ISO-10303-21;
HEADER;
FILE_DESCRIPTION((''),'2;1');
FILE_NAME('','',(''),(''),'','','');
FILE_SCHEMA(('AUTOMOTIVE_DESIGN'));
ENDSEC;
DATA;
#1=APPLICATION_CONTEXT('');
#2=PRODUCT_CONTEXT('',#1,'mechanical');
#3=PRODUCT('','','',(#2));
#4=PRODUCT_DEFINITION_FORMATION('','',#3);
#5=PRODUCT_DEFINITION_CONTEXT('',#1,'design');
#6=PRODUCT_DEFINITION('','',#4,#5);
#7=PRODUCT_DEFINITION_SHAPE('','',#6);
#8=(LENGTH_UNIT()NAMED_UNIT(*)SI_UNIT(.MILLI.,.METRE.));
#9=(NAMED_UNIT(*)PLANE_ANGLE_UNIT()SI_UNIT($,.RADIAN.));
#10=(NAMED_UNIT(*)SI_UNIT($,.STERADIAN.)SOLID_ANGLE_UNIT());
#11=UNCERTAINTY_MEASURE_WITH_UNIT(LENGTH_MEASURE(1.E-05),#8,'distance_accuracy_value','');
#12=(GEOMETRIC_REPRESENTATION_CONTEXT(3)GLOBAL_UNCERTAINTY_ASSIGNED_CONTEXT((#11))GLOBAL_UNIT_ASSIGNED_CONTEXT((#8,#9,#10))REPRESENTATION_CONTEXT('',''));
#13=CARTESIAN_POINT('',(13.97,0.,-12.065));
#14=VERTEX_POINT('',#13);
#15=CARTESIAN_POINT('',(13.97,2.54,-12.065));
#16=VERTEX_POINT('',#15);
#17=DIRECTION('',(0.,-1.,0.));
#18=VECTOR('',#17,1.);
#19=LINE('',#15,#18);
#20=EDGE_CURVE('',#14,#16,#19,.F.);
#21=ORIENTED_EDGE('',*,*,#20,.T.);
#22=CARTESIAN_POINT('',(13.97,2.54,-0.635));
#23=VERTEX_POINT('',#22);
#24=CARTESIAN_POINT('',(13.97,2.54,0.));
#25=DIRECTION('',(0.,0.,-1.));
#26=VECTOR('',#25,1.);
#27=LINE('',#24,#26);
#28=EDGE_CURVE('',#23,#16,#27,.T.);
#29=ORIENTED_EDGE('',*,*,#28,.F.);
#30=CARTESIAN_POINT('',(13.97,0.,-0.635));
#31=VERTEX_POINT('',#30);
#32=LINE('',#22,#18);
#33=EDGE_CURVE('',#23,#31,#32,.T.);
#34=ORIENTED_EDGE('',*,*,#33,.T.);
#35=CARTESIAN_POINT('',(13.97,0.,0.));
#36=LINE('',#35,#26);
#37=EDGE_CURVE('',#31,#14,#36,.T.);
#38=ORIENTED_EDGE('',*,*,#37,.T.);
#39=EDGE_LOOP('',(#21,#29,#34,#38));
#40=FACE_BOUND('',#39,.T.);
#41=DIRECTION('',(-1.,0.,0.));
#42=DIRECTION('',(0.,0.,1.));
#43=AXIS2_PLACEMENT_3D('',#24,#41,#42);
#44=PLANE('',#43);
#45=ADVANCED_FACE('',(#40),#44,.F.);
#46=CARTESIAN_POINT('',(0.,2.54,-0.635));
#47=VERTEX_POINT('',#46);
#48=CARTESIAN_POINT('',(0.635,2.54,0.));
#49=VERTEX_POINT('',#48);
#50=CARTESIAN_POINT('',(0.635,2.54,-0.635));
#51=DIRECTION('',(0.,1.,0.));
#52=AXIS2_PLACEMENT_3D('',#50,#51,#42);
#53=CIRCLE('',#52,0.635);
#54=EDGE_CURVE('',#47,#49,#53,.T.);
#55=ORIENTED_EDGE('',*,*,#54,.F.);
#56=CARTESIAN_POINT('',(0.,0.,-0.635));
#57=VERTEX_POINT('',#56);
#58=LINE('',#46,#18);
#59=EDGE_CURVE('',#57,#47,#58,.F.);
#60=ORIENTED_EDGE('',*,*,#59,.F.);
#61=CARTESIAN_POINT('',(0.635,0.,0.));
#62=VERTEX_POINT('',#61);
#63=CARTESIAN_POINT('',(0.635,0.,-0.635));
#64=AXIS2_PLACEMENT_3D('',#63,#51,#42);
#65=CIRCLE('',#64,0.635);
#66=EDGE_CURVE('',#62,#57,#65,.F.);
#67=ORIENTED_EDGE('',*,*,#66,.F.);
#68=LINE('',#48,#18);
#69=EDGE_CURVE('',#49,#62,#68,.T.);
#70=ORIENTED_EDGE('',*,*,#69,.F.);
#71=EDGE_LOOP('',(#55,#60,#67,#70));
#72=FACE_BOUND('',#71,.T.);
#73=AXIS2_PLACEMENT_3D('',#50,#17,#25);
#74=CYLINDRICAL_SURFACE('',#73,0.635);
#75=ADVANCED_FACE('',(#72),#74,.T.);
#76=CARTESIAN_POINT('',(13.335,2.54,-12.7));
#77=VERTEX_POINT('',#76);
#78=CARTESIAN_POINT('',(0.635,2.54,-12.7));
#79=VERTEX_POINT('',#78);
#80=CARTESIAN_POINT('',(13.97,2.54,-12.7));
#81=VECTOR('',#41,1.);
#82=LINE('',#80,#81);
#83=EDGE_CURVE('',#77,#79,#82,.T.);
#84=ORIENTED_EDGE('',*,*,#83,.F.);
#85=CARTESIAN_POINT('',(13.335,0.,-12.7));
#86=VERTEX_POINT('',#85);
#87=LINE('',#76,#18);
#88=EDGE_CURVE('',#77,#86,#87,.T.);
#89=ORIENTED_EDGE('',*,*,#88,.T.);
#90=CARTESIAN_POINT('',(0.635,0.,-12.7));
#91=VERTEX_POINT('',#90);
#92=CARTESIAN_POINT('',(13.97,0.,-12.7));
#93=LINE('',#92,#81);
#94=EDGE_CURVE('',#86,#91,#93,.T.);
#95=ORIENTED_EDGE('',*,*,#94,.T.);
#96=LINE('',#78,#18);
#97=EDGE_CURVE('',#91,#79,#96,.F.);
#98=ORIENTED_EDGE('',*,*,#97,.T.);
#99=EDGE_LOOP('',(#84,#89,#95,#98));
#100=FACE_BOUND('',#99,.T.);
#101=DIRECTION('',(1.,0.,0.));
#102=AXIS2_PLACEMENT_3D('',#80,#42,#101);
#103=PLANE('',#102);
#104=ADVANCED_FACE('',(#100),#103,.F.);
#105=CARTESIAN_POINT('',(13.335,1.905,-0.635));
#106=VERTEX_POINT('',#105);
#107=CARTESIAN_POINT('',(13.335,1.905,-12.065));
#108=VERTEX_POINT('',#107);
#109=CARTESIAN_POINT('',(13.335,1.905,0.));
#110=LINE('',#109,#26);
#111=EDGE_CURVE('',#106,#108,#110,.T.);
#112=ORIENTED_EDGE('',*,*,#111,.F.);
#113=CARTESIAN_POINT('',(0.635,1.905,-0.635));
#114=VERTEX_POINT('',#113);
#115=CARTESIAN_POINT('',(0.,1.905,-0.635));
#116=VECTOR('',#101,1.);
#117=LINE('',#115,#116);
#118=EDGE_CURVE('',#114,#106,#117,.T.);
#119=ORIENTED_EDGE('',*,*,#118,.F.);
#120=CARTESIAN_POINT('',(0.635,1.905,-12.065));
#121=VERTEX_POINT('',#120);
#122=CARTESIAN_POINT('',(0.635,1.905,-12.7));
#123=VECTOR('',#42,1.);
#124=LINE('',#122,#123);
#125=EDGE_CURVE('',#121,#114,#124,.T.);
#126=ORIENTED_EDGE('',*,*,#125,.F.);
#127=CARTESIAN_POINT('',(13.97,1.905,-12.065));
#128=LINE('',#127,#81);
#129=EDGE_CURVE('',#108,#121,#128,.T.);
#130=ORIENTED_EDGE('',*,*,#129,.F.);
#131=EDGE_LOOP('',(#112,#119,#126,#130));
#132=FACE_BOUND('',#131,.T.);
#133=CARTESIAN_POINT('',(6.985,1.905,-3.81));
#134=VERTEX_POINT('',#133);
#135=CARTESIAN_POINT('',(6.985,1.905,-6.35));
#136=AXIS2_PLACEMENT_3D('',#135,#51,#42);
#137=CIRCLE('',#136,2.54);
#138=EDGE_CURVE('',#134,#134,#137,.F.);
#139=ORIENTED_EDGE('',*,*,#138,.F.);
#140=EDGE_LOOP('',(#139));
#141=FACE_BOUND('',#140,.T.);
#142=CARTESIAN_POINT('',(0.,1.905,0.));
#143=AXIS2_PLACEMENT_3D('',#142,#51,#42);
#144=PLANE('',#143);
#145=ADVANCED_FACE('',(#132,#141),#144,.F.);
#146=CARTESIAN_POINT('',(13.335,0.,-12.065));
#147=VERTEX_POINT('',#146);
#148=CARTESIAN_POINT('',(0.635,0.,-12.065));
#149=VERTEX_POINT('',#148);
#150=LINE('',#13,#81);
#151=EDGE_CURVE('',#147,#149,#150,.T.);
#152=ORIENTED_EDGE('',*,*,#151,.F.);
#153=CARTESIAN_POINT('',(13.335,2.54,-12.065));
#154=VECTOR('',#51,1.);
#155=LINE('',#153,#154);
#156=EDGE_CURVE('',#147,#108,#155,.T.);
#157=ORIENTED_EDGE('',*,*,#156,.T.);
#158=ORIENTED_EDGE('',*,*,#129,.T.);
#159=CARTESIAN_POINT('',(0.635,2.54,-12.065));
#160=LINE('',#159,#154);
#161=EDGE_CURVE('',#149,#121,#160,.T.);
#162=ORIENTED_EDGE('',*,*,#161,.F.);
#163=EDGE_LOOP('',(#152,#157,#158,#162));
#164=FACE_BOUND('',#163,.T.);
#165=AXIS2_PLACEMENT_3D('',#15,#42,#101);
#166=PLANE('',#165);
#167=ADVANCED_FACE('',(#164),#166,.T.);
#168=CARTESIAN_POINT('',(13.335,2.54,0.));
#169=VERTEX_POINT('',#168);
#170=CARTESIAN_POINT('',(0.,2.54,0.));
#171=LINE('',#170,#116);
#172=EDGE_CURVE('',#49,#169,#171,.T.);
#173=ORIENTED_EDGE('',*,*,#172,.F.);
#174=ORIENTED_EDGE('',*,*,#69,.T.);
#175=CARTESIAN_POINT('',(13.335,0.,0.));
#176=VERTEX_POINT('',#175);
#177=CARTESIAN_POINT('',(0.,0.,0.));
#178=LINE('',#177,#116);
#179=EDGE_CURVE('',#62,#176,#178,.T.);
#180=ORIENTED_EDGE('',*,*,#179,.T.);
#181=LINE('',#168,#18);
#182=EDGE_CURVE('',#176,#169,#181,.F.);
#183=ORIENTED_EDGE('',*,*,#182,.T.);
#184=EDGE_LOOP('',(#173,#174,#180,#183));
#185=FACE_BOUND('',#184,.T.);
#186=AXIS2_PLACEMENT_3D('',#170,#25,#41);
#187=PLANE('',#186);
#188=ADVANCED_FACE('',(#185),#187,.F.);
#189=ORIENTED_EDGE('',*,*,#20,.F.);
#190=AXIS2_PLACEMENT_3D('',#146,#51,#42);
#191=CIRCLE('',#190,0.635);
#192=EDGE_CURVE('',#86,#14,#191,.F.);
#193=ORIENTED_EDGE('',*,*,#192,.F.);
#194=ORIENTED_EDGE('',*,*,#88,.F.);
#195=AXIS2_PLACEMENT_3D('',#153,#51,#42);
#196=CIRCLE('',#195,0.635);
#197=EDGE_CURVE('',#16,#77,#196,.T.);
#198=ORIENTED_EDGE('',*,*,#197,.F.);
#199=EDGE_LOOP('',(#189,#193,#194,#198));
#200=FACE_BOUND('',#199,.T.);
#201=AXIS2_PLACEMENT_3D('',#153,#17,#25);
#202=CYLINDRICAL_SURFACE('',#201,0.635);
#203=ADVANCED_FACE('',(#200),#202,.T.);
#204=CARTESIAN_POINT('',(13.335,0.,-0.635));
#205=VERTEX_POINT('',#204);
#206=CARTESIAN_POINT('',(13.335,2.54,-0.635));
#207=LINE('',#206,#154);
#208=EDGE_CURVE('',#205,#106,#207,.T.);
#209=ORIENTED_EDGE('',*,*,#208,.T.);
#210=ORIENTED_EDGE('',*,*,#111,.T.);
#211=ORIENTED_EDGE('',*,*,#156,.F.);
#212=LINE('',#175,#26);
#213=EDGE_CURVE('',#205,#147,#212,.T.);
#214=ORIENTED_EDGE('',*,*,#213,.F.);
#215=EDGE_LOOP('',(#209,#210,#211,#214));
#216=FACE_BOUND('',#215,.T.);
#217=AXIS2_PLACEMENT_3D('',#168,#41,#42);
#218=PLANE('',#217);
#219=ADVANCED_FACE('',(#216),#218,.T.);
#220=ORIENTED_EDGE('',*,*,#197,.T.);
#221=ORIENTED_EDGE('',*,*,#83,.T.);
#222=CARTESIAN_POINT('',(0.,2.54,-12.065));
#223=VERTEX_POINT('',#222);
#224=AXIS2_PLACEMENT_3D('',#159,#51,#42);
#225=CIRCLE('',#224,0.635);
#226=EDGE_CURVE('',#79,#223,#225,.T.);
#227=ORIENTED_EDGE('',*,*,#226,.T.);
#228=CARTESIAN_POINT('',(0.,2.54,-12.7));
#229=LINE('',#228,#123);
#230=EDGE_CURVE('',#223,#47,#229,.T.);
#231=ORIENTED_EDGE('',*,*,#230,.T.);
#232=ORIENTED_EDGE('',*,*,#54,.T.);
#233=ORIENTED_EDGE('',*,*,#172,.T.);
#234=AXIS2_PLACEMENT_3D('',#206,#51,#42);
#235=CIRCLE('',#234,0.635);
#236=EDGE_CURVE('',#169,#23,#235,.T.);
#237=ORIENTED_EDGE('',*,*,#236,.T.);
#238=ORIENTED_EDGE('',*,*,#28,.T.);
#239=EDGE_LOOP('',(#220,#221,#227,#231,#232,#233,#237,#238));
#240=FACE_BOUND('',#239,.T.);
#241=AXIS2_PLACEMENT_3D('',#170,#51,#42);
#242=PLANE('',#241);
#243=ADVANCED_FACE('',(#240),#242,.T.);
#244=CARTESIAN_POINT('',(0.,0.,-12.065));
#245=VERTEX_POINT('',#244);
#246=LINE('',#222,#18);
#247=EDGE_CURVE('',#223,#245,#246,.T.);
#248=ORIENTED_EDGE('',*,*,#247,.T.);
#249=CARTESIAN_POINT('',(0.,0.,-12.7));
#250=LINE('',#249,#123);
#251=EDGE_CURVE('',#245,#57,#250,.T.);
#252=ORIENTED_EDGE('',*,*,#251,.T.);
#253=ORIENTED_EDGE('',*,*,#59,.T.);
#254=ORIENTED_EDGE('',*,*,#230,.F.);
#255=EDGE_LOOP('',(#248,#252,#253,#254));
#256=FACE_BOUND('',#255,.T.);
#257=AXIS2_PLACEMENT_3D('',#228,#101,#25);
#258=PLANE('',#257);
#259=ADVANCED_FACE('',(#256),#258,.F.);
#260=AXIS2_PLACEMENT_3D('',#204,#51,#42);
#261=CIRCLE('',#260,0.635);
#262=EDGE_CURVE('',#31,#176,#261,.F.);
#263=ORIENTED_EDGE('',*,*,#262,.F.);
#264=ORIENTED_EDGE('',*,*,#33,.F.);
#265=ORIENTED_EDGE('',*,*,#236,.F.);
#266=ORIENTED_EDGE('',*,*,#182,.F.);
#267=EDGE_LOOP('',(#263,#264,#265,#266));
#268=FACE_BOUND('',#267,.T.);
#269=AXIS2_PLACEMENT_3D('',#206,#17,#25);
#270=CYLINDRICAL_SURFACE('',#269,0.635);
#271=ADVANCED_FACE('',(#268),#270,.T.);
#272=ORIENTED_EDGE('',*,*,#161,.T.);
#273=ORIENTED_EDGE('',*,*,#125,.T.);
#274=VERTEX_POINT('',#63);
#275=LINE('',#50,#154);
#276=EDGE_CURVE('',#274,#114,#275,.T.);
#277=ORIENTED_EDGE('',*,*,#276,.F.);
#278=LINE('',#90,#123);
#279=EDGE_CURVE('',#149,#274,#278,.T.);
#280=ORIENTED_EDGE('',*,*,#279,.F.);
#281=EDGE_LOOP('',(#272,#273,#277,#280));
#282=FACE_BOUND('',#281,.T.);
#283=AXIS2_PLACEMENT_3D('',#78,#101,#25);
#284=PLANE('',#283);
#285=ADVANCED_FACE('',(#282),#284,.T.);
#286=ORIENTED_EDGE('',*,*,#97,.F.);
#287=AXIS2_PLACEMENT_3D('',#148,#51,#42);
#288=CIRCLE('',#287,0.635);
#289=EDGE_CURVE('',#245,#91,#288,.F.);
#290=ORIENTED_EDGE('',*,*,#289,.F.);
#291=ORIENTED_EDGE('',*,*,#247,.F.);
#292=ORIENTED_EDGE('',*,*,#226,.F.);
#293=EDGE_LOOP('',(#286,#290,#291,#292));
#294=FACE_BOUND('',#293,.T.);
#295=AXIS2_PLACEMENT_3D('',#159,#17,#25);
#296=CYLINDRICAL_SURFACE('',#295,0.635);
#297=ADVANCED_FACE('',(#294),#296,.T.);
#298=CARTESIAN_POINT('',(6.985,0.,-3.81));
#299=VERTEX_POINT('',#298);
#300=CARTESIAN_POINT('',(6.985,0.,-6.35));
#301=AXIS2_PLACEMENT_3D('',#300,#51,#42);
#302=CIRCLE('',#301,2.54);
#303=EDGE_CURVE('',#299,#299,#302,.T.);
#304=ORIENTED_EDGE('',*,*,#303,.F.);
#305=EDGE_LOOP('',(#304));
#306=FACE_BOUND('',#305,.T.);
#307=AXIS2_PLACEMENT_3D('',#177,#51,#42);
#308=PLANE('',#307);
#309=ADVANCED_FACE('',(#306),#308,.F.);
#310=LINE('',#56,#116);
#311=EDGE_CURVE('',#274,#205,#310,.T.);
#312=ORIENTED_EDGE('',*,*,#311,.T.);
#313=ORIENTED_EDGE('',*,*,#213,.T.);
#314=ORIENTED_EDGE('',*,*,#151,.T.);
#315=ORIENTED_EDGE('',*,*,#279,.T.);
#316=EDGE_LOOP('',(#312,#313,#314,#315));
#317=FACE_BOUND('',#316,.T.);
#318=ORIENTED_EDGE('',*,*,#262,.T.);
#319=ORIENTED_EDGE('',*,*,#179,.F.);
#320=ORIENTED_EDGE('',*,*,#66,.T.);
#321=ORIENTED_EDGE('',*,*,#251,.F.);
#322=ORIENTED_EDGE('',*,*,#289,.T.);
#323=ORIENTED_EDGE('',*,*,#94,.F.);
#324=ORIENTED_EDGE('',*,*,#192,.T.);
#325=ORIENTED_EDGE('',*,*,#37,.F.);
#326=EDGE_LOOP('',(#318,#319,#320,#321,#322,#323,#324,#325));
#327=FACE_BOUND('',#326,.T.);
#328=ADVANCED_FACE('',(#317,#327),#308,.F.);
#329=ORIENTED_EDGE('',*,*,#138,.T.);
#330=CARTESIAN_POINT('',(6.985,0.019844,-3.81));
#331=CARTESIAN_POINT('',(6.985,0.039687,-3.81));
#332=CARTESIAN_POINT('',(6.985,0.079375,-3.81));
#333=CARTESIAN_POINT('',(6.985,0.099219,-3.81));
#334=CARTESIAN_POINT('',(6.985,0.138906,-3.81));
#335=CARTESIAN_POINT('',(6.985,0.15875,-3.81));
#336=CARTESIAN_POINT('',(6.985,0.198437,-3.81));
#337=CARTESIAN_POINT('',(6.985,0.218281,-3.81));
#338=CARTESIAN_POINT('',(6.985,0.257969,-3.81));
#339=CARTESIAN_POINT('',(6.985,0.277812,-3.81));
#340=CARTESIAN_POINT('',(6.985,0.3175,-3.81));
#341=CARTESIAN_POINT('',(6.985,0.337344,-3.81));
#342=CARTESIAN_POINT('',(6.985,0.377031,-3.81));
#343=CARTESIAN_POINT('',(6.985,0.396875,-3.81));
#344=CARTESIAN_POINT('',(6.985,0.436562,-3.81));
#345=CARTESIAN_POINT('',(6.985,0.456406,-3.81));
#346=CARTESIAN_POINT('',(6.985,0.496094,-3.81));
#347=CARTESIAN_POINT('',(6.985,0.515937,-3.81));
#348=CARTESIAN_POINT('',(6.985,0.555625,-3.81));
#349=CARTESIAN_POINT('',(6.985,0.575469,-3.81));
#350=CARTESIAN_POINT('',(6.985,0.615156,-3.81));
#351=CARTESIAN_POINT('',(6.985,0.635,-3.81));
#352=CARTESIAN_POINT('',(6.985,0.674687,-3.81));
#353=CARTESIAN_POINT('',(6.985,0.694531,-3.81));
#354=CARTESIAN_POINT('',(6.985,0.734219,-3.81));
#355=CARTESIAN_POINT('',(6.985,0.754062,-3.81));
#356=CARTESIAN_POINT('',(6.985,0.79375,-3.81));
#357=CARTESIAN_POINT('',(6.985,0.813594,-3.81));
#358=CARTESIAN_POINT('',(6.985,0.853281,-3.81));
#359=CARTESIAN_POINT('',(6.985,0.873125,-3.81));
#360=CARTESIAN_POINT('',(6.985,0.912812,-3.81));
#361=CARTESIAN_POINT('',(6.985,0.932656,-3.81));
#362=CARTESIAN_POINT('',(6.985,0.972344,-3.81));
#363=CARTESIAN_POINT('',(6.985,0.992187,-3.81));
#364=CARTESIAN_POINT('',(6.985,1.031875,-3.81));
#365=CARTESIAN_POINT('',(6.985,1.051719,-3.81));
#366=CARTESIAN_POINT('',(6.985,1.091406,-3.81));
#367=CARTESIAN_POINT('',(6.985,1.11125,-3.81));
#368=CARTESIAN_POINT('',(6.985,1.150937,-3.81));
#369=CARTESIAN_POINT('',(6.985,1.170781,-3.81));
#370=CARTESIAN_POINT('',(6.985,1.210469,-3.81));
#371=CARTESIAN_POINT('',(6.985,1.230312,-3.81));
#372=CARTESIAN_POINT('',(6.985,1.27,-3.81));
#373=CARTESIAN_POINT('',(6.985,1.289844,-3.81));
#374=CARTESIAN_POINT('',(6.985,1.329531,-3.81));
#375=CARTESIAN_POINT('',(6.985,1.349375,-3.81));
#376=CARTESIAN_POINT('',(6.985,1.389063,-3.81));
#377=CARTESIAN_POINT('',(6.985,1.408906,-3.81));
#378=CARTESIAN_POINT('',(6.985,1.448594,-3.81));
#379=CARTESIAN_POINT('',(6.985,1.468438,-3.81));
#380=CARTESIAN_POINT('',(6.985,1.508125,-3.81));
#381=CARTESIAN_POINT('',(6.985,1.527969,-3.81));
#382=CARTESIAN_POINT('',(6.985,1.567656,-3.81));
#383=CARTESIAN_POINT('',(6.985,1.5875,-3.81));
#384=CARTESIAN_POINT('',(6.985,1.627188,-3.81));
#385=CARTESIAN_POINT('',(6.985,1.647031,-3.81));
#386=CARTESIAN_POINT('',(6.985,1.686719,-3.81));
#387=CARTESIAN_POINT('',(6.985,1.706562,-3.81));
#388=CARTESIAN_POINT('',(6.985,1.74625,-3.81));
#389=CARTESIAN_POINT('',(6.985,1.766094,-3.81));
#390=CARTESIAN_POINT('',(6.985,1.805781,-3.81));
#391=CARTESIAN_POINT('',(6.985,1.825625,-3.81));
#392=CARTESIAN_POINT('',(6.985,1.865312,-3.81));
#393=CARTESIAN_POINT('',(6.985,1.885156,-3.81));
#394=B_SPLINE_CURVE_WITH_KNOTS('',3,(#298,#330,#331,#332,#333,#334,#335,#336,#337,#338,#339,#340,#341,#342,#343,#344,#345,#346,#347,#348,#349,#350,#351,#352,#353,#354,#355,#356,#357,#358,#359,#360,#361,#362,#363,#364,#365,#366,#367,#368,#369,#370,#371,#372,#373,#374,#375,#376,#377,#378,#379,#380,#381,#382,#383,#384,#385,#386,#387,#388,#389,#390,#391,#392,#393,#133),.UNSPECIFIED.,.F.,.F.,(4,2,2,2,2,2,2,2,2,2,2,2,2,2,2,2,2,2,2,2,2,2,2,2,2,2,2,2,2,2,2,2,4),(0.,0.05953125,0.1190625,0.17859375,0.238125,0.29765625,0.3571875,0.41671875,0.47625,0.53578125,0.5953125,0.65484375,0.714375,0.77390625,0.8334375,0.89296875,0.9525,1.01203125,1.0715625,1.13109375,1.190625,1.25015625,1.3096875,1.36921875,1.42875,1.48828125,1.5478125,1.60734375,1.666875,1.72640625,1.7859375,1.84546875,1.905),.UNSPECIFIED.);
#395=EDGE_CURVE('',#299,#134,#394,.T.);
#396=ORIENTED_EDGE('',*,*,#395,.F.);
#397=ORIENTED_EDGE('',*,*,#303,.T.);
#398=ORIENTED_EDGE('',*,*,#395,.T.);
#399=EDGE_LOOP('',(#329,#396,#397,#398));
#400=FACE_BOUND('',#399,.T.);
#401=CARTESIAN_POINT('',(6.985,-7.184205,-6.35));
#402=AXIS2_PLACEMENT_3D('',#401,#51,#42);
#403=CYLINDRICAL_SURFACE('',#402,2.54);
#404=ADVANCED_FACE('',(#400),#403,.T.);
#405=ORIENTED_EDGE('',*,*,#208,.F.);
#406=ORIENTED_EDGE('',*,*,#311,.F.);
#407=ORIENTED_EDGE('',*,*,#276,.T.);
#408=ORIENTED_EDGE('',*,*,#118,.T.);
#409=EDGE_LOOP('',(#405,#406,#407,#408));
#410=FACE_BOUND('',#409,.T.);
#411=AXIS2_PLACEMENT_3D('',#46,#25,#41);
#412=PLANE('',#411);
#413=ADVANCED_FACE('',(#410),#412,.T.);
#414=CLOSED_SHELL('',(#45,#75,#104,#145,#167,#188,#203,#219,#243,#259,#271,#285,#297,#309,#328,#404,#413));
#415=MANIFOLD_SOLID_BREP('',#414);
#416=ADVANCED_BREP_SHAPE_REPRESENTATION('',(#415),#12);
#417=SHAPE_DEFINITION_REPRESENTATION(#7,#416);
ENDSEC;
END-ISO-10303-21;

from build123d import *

# Parameters (mm, degrees)
SKETCH1_W           = 13.97
SKETCH1_H           = 12.7
BOSS_EXTRUDE1_DEPTH = 2.54
FILLET1_R           = 0.635
SHELL1_START        = 0.635
SHELL1_OUTLINE_W    = 1.905
SHELL1_OUTLINE_H    = 11.43
SHELL1_DEPTH        = 12.7
SKETCH2_R           = 2.54
BOSS_EXTRUDE2_DEPTH = 1.905


# Read off the part's stored shape, not the designer's step: Shell1
with BuildPart() as part:
    # Sketch1 → Boss-Extrude1 (new body)
    with BuildSketch(Plane(origin=(0, 0, 0), x_dir=(1, 0, 0), z_dir=(0, 1, 0))):
        with Locations((6.985, 6.35)):
            Rectangle(SKETCH1_W, SKETCH1_H)
    extrude(amount=BOSS_EXTRUDE1_DEPTH)

    # Fillet1
    fillet1_edges = [part.edges().sort_by_distance(p)[0] for p in [
        (0, 1.27, -12.7),
        (13.97, 1.27, -12.7),
        (13.97, 1.27, 0),
        (0, 1.27, 0),
    ]]
    fillet(fillet1_edges, radius=FILLET1_R)

    # Shell1 outline → Shell1 (cut)
    with BuildSketch(Plane.YZ.offset(SHELL1_START)):
        with Locations((0.9525, -6.35)):
            Rectangle(SHELL1_OUTLINE_W, SHELL1_OUTLINE_H)
    extrude(amount=SHELL1_DEPTH, mode=Mode.SUBTRACT)

    # Sketch2 → Boss-Extrude2 (add)
    with BuildSketch(Plane(origin=(0, 1.905, 0), x_dir=(-1, 0, 0), z_dir=(0, -1, 0))):
        with Locations(Location((-6.985, 6.35, 0), (0, 0, 270))):
            Circle(SKETCH2_R)
    extrude(amount=BOSS_EXTRUDE2_DEPTH)


solid = part.part
